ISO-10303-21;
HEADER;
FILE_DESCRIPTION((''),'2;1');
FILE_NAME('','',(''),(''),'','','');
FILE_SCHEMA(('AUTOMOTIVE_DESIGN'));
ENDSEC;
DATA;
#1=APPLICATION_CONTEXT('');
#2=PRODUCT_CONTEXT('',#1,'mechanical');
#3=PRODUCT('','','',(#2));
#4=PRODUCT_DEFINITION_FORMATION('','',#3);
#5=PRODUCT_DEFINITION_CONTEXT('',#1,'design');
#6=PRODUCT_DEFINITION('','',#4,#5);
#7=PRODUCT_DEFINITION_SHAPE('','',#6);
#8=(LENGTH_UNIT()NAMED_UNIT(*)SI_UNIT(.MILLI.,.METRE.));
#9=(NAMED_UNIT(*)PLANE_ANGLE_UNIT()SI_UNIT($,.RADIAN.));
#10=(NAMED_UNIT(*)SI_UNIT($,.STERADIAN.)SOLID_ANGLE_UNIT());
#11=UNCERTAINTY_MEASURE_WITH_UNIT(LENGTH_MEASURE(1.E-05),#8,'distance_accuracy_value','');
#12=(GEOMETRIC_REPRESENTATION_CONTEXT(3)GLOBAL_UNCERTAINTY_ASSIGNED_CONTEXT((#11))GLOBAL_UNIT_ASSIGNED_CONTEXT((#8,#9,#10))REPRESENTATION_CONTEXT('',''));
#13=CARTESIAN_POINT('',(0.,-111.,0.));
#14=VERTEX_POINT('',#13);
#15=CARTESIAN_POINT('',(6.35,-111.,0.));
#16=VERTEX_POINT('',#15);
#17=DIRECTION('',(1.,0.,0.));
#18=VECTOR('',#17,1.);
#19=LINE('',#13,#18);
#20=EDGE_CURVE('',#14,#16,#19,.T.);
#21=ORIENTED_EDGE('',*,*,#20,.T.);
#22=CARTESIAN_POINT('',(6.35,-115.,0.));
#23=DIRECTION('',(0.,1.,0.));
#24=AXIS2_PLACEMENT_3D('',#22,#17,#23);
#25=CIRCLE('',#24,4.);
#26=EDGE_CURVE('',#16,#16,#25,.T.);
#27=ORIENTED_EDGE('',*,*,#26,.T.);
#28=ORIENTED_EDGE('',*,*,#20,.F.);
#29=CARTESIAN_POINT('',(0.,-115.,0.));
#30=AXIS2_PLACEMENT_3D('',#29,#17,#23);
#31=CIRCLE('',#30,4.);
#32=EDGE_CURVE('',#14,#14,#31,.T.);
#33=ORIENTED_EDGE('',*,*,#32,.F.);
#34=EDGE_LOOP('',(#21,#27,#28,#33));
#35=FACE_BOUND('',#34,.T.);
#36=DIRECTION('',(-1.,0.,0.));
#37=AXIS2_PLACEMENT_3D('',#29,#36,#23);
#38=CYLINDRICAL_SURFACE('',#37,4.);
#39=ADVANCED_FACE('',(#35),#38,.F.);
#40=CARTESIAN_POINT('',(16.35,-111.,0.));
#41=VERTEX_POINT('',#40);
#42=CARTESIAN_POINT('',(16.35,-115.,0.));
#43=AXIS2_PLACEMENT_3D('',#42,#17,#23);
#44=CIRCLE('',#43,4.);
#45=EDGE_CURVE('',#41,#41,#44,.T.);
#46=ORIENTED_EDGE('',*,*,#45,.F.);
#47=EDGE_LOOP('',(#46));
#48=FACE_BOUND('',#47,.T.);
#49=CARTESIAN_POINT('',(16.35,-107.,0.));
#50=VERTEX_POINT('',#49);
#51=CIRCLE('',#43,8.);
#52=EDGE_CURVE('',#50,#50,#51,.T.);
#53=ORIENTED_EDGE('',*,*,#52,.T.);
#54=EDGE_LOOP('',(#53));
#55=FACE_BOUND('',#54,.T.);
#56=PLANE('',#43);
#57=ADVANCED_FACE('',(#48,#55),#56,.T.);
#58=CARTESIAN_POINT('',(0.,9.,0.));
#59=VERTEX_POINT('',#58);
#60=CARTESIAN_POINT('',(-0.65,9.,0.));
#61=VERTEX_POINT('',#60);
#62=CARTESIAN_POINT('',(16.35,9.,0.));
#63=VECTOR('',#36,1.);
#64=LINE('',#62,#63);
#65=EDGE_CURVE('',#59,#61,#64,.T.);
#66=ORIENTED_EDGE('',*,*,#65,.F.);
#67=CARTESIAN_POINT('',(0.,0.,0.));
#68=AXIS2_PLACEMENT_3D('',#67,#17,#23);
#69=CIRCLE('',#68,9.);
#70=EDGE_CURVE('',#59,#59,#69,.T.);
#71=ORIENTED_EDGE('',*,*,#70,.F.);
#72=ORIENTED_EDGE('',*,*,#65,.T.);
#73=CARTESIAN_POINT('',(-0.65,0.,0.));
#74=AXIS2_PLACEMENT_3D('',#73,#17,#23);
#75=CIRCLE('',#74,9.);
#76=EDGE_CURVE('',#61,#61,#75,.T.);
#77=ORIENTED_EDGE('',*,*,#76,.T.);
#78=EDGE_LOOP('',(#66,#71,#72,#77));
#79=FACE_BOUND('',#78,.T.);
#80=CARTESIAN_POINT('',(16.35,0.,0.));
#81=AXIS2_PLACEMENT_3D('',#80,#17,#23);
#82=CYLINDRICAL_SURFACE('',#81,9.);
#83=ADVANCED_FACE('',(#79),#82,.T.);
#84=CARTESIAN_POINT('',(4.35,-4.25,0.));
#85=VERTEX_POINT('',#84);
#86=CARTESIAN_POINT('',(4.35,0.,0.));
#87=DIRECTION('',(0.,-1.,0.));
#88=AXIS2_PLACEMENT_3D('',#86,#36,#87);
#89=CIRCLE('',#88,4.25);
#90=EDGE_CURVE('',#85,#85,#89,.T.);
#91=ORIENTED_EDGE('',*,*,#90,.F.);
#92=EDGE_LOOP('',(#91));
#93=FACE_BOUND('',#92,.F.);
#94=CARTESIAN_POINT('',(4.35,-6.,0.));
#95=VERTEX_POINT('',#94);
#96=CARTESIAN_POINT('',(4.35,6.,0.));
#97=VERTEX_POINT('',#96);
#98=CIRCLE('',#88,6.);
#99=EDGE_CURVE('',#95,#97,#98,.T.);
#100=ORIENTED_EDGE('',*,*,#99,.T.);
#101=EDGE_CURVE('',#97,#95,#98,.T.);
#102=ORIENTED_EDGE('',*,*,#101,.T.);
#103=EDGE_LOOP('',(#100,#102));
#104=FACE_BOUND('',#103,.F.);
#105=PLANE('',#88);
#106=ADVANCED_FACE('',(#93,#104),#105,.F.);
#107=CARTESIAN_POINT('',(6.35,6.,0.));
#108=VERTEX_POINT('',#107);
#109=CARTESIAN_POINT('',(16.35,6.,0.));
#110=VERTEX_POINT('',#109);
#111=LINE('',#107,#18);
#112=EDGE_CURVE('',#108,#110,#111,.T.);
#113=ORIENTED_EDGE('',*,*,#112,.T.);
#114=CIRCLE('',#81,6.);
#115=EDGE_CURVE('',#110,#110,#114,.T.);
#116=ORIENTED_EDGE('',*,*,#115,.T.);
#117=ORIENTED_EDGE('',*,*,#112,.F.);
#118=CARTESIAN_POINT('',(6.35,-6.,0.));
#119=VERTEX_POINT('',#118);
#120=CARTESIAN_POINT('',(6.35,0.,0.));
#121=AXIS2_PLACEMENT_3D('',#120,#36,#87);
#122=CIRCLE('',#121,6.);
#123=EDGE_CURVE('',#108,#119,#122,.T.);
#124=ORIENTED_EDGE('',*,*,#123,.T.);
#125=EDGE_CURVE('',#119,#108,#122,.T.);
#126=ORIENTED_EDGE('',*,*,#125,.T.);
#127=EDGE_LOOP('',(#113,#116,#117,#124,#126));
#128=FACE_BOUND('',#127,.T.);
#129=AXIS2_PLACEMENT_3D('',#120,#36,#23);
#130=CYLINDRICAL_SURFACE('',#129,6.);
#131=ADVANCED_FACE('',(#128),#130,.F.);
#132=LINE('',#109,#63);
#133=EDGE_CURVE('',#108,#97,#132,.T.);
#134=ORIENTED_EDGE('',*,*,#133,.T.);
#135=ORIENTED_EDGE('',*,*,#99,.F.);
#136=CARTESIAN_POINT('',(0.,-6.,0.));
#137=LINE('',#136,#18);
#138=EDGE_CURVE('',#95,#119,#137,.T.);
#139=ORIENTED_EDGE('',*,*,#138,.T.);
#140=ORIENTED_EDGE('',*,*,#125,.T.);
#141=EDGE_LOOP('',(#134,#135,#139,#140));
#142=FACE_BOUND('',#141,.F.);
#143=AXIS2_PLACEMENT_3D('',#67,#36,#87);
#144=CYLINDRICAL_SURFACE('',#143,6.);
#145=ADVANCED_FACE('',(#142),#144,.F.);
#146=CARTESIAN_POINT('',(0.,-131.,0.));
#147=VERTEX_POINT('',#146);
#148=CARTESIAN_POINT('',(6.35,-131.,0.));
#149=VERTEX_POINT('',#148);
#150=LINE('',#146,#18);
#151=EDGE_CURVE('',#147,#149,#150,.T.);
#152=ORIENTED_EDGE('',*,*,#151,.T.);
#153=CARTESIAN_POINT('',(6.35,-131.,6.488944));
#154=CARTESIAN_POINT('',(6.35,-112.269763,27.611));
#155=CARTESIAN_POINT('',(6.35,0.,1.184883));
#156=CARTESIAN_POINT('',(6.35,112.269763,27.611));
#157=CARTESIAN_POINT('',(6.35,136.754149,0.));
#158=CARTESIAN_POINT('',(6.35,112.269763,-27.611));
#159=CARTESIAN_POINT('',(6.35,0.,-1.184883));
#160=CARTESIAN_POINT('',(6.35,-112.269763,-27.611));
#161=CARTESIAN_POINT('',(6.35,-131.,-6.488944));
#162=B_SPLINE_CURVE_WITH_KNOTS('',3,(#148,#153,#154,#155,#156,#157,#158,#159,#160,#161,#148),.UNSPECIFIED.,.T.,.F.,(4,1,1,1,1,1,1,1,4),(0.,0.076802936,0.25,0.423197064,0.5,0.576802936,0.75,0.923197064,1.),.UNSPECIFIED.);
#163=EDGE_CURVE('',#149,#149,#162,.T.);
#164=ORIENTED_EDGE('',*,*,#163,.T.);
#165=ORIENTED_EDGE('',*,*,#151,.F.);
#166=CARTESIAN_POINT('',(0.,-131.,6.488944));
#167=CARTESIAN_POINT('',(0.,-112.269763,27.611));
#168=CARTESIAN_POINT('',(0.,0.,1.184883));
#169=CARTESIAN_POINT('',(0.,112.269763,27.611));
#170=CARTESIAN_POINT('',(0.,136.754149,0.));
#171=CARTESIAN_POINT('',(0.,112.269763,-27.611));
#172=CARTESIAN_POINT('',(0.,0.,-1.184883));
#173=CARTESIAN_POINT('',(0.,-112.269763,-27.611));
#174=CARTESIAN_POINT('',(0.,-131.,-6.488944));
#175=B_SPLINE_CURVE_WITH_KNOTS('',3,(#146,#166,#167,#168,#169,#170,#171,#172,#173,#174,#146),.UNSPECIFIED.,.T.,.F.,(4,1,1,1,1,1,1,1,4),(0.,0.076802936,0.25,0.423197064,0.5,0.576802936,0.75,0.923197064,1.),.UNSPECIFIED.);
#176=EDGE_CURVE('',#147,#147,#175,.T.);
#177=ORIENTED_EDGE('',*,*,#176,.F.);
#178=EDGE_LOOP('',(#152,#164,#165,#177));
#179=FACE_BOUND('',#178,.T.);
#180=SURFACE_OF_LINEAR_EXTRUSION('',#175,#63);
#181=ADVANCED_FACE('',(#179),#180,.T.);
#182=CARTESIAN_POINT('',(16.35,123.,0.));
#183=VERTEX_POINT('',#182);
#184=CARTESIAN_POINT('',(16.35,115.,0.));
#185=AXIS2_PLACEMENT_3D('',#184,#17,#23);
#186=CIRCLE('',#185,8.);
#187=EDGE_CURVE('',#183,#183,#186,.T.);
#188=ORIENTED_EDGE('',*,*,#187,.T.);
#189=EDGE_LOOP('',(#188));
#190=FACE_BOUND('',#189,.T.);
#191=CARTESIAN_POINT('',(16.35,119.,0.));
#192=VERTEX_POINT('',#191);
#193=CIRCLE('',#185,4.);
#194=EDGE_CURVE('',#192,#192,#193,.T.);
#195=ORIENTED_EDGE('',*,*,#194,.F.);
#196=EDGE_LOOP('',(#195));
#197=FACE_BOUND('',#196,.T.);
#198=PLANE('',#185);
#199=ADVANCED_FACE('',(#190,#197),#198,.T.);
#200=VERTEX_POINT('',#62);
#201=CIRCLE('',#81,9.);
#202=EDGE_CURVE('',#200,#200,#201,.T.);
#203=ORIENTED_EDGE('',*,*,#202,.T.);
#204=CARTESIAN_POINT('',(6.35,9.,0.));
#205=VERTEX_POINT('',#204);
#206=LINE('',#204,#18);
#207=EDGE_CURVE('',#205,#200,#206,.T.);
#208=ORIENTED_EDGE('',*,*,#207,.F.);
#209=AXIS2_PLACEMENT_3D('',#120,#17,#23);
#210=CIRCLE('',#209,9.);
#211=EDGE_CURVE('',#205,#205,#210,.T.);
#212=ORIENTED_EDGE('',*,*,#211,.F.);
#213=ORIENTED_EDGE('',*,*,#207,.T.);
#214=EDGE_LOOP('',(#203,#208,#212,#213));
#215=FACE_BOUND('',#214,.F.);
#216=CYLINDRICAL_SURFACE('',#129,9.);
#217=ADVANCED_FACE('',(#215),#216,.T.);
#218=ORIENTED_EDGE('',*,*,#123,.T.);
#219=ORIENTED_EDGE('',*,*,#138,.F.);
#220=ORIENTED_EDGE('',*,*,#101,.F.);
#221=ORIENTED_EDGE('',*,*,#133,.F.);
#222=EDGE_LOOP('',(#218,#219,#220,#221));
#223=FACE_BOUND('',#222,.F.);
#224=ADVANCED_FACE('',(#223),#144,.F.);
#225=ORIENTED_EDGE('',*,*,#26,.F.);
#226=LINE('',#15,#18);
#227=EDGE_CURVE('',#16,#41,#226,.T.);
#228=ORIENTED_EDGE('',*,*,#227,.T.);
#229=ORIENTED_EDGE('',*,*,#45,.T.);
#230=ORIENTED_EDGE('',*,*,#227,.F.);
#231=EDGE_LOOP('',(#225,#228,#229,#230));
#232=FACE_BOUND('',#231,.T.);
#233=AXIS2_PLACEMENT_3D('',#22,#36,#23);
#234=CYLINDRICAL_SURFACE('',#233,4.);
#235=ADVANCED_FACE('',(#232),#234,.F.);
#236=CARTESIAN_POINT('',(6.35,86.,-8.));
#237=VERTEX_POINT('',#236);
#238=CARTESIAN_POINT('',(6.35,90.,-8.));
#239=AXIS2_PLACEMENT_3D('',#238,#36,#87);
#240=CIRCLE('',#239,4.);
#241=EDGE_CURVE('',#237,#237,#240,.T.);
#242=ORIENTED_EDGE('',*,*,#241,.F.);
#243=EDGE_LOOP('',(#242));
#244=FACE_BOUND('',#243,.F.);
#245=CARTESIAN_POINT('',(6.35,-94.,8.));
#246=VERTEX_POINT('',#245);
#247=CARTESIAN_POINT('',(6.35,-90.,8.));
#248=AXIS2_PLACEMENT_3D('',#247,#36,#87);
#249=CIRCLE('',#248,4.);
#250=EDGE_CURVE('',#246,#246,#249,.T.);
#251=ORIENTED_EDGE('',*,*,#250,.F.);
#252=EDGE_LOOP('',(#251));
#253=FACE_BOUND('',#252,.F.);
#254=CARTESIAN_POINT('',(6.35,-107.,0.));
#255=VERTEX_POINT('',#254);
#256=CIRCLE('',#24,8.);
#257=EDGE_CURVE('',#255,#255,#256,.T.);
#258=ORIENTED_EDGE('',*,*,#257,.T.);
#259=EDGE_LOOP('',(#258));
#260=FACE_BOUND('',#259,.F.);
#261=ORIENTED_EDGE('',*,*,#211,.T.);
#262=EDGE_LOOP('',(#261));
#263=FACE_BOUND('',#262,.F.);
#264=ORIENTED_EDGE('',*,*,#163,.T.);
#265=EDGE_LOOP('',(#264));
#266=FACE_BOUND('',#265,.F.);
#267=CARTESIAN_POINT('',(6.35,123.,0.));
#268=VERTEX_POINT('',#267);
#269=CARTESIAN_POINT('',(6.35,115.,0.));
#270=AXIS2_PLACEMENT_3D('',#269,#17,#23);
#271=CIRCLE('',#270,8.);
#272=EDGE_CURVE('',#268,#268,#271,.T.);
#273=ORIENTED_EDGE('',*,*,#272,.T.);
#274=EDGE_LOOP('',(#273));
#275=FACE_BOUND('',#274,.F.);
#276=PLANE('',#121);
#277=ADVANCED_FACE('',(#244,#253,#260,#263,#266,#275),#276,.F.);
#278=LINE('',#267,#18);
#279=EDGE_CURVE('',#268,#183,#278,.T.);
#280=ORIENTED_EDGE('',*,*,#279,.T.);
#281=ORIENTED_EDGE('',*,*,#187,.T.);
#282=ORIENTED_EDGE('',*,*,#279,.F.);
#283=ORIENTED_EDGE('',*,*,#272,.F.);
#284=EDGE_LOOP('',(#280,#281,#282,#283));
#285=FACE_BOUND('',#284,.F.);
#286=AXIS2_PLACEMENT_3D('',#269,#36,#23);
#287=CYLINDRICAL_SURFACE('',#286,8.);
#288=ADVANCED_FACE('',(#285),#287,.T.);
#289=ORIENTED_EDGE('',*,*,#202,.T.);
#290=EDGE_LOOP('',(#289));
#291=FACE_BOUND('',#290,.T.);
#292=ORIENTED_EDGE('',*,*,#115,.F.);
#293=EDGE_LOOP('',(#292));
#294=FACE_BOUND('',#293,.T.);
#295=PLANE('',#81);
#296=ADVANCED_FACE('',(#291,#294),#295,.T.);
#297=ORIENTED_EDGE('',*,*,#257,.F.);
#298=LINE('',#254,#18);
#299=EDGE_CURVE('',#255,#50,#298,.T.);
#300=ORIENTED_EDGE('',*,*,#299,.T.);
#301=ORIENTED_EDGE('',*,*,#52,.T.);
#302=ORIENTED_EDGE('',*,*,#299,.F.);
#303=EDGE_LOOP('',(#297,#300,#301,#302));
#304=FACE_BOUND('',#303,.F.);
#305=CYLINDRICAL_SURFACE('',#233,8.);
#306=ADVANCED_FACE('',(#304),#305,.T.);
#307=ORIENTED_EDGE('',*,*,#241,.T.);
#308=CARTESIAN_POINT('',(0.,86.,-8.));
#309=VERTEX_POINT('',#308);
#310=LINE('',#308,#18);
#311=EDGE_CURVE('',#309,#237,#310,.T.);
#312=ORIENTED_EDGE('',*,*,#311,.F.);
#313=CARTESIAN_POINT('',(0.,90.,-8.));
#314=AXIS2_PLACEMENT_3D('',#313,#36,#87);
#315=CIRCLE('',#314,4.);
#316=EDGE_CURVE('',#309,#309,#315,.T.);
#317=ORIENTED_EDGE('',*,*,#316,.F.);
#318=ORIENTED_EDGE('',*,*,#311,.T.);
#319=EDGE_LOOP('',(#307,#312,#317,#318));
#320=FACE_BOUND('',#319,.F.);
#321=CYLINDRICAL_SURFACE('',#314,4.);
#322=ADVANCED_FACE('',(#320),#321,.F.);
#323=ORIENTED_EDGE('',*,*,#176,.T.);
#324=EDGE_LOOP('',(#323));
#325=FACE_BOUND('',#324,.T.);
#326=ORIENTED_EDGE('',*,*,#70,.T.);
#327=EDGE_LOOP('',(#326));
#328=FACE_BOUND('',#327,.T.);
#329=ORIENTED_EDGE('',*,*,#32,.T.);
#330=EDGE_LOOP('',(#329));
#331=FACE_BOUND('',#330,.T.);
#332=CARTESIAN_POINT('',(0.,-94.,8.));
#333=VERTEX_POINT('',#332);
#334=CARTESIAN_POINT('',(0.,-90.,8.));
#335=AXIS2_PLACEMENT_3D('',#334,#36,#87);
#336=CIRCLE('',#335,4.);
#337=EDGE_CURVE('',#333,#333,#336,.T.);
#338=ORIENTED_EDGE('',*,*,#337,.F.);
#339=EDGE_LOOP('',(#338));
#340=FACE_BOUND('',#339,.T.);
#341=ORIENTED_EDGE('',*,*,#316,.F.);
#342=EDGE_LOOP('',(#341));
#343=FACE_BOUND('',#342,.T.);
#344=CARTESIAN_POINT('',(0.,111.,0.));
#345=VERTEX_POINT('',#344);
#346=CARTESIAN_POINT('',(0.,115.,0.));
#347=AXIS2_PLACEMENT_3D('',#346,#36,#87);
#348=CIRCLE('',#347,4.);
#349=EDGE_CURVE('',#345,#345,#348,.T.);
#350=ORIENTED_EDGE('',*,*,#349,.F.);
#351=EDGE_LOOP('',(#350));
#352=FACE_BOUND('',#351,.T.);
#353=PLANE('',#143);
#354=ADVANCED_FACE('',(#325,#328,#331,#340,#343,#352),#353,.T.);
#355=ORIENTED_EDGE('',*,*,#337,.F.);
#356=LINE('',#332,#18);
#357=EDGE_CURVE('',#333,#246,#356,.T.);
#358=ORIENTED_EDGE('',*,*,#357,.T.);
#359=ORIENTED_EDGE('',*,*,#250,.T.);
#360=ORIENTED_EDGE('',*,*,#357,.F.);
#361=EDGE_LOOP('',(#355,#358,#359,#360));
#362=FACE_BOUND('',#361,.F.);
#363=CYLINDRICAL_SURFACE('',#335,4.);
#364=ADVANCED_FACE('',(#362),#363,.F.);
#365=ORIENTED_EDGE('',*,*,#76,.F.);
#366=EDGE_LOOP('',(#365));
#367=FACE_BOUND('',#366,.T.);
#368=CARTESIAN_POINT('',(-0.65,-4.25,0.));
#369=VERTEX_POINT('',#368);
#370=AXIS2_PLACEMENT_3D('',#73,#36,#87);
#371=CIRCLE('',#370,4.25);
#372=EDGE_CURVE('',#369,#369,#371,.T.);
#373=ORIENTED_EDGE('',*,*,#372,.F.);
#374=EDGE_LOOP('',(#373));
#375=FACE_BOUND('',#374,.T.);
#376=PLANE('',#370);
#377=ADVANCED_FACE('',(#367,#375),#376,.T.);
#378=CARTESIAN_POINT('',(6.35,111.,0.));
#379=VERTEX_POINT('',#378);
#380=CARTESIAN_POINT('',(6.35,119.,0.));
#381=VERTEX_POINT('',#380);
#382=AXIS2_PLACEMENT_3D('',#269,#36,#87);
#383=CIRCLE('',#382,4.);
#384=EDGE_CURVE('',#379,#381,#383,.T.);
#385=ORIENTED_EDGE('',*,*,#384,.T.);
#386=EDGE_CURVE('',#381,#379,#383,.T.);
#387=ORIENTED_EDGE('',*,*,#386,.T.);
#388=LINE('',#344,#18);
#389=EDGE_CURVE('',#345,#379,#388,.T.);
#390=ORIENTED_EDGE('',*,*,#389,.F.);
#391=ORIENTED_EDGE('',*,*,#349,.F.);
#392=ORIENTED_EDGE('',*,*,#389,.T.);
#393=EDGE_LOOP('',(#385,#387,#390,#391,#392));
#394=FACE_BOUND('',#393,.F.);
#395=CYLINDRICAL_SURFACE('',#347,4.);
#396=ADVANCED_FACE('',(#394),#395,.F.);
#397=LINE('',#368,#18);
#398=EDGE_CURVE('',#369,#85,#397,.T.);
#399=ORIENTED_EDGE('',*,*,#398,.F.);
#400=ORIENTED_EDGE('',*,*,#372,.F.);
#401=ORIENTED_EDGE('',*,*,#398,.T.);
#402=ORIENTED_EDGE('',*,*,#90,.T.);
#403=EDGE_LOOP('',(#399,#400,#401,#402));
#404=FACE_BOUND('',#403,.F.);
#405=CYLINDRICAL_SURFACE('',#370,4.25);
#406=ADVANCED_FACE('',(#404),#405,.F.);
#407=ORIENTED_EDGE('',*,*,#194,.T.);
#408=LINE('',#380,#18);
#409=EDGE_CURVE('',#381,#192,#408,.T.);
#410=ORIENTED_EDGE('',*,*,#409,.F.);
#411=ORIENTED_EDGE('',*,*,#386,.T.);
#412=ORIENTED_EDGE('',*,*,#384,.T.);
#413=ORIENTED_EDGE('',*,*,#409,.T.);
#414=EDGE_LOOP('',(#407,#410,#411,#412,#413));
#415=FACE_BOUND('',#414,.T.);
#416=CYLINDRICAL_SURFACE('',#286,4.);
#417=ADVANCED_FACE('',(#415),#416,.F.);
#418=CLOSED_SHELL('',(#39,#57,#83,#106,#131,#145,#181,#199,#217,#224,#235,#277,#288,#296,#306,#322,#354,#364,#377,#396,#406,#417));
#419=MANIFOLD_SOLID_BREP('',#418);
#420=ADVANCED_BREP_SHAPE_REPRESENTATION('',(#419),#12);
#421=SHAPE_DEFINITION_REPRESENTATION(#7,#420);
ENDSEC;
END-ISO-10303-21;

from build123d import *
from build123d import SkipClean  # not in build123d's __all__

# Parameters (mm, degrees)
F0_R     = 4
F1_DEPTH = 6.35
F2_R     = 9
F2_R_2   = 6
F2_R_3   = 8
F2_R_4   = 4
F3_DEPTH = 10
F4_DEPTH = 17
F5_R     = 6
F5_R_2   = 4.25
F6_DEPTH = 5
F7_R     = 4
F8_DEPTH = 25


# Not quite as in the source:
# - after a boolean that leaves OpenCascade's solid faulty, fix() repairs it


with BuildPart() as f1:
    # F0 (on Right) → F1 (new body)
    with BuildSketch(Plane.YZ):
        with BuildLine():
            add(Edge.make_bspline(
                [(-131, 0), (-131, 6.4889437082), (-112.2697628073, 27.6109999607), (0, 1.1848825406), (112.2697628073, 27.6109999607), (136.7541488069, 0), (112.2697628073, -27.6109999607), (0, -1.1848825406), (-112.2697628073, -27.6109999607), (-131, -6.4889437082), (-131, 0)],
                knots=[0, 0, 0, 0, 0.0768029356, 0.25, 0.4231970644, 0.5, 0.5768029356, 0.75, 0.9231970644, 1, 1, 1, 1], degree=3))
        make_face()
        with Locations((-115, 0)):
            Circle(F0_R, mode=Mode.SUBTRACT)
        with BuildLine():
            ThreePointArc((6, 0), (0, -6), (-6, 0))
            ThreePointArc((-6, 0), (0, 6), (6, 0))
        make_face(mode=Mode.SUBTRACT)
        with BuildLine():
            ThreePointArc((119, 0), (115, -4), (111, 0))
            ThreePointArc((111, 0), (115, 4), (119, 0))
        make_face(mode=Mode.SUBTRACT)
    extrude(amount=F1_DEPTH)

    # F2 (on face) → F3 (join)
    with BuildSketch(Plane.YZ.offset(6.35)):
        Circle(F2_R)
        Circle(F2_R_2, mode=Mode.SUBTRACT)
        with Locations((-115, 0)):
            Circle(F2_R_3)
        with Locations((-115, 0)):
            Circle(F2_R_4, mode=Mode.SUBTRACT)
        with Locations((115, 0)):
            Circle(F2_R_3)
        with Locations((115, 0)):
            Circle(F2_R_4, mode=Mode.SUBTRACT)
    with SkipClean():  # cleaning this boolean's faces spoils the solid; the shape is the same uncleaned
        extrude(amount=F3_DEPTH)

    # F4 (add): a face of the model
    f4_faces = [f1.faces().sort_by_distance(p)[0] for p in [
        (16.35, -8.7454415588, 0),
    ]]
    extrude(f4_faces, amount=-F4_DEPTH)

    add(f1.part.fix(), mode=Mode.REPLACE)

    # F5 (on face) → F6 (join)
    with BuildSketch(Plane(origin=(-0.65, 0, 0), x_dir=(0, -1, 0), z_dir=(-1, 0, 0))):
        Circle(F5_R)
        Circle(F5_R_2, mode=Mode.SUBTRACT)
    extrude(amount=-F6_DEPTH)

    # F7 (on face) → F8 (cut)
    with BuildSketch(Plane(origin=(0, 0, 0), x_dir=(0, -1, 0), z_dir=(-1, 0, 0))):
        with Locations((90, 8)):
            Circle(F7_R)
        with Locations((-90, -8)):
            Circle(F7_R)
    extrude(amount=-F8_DEPTH, mode=Mode.SUBTRACT)


solid = f1.part
